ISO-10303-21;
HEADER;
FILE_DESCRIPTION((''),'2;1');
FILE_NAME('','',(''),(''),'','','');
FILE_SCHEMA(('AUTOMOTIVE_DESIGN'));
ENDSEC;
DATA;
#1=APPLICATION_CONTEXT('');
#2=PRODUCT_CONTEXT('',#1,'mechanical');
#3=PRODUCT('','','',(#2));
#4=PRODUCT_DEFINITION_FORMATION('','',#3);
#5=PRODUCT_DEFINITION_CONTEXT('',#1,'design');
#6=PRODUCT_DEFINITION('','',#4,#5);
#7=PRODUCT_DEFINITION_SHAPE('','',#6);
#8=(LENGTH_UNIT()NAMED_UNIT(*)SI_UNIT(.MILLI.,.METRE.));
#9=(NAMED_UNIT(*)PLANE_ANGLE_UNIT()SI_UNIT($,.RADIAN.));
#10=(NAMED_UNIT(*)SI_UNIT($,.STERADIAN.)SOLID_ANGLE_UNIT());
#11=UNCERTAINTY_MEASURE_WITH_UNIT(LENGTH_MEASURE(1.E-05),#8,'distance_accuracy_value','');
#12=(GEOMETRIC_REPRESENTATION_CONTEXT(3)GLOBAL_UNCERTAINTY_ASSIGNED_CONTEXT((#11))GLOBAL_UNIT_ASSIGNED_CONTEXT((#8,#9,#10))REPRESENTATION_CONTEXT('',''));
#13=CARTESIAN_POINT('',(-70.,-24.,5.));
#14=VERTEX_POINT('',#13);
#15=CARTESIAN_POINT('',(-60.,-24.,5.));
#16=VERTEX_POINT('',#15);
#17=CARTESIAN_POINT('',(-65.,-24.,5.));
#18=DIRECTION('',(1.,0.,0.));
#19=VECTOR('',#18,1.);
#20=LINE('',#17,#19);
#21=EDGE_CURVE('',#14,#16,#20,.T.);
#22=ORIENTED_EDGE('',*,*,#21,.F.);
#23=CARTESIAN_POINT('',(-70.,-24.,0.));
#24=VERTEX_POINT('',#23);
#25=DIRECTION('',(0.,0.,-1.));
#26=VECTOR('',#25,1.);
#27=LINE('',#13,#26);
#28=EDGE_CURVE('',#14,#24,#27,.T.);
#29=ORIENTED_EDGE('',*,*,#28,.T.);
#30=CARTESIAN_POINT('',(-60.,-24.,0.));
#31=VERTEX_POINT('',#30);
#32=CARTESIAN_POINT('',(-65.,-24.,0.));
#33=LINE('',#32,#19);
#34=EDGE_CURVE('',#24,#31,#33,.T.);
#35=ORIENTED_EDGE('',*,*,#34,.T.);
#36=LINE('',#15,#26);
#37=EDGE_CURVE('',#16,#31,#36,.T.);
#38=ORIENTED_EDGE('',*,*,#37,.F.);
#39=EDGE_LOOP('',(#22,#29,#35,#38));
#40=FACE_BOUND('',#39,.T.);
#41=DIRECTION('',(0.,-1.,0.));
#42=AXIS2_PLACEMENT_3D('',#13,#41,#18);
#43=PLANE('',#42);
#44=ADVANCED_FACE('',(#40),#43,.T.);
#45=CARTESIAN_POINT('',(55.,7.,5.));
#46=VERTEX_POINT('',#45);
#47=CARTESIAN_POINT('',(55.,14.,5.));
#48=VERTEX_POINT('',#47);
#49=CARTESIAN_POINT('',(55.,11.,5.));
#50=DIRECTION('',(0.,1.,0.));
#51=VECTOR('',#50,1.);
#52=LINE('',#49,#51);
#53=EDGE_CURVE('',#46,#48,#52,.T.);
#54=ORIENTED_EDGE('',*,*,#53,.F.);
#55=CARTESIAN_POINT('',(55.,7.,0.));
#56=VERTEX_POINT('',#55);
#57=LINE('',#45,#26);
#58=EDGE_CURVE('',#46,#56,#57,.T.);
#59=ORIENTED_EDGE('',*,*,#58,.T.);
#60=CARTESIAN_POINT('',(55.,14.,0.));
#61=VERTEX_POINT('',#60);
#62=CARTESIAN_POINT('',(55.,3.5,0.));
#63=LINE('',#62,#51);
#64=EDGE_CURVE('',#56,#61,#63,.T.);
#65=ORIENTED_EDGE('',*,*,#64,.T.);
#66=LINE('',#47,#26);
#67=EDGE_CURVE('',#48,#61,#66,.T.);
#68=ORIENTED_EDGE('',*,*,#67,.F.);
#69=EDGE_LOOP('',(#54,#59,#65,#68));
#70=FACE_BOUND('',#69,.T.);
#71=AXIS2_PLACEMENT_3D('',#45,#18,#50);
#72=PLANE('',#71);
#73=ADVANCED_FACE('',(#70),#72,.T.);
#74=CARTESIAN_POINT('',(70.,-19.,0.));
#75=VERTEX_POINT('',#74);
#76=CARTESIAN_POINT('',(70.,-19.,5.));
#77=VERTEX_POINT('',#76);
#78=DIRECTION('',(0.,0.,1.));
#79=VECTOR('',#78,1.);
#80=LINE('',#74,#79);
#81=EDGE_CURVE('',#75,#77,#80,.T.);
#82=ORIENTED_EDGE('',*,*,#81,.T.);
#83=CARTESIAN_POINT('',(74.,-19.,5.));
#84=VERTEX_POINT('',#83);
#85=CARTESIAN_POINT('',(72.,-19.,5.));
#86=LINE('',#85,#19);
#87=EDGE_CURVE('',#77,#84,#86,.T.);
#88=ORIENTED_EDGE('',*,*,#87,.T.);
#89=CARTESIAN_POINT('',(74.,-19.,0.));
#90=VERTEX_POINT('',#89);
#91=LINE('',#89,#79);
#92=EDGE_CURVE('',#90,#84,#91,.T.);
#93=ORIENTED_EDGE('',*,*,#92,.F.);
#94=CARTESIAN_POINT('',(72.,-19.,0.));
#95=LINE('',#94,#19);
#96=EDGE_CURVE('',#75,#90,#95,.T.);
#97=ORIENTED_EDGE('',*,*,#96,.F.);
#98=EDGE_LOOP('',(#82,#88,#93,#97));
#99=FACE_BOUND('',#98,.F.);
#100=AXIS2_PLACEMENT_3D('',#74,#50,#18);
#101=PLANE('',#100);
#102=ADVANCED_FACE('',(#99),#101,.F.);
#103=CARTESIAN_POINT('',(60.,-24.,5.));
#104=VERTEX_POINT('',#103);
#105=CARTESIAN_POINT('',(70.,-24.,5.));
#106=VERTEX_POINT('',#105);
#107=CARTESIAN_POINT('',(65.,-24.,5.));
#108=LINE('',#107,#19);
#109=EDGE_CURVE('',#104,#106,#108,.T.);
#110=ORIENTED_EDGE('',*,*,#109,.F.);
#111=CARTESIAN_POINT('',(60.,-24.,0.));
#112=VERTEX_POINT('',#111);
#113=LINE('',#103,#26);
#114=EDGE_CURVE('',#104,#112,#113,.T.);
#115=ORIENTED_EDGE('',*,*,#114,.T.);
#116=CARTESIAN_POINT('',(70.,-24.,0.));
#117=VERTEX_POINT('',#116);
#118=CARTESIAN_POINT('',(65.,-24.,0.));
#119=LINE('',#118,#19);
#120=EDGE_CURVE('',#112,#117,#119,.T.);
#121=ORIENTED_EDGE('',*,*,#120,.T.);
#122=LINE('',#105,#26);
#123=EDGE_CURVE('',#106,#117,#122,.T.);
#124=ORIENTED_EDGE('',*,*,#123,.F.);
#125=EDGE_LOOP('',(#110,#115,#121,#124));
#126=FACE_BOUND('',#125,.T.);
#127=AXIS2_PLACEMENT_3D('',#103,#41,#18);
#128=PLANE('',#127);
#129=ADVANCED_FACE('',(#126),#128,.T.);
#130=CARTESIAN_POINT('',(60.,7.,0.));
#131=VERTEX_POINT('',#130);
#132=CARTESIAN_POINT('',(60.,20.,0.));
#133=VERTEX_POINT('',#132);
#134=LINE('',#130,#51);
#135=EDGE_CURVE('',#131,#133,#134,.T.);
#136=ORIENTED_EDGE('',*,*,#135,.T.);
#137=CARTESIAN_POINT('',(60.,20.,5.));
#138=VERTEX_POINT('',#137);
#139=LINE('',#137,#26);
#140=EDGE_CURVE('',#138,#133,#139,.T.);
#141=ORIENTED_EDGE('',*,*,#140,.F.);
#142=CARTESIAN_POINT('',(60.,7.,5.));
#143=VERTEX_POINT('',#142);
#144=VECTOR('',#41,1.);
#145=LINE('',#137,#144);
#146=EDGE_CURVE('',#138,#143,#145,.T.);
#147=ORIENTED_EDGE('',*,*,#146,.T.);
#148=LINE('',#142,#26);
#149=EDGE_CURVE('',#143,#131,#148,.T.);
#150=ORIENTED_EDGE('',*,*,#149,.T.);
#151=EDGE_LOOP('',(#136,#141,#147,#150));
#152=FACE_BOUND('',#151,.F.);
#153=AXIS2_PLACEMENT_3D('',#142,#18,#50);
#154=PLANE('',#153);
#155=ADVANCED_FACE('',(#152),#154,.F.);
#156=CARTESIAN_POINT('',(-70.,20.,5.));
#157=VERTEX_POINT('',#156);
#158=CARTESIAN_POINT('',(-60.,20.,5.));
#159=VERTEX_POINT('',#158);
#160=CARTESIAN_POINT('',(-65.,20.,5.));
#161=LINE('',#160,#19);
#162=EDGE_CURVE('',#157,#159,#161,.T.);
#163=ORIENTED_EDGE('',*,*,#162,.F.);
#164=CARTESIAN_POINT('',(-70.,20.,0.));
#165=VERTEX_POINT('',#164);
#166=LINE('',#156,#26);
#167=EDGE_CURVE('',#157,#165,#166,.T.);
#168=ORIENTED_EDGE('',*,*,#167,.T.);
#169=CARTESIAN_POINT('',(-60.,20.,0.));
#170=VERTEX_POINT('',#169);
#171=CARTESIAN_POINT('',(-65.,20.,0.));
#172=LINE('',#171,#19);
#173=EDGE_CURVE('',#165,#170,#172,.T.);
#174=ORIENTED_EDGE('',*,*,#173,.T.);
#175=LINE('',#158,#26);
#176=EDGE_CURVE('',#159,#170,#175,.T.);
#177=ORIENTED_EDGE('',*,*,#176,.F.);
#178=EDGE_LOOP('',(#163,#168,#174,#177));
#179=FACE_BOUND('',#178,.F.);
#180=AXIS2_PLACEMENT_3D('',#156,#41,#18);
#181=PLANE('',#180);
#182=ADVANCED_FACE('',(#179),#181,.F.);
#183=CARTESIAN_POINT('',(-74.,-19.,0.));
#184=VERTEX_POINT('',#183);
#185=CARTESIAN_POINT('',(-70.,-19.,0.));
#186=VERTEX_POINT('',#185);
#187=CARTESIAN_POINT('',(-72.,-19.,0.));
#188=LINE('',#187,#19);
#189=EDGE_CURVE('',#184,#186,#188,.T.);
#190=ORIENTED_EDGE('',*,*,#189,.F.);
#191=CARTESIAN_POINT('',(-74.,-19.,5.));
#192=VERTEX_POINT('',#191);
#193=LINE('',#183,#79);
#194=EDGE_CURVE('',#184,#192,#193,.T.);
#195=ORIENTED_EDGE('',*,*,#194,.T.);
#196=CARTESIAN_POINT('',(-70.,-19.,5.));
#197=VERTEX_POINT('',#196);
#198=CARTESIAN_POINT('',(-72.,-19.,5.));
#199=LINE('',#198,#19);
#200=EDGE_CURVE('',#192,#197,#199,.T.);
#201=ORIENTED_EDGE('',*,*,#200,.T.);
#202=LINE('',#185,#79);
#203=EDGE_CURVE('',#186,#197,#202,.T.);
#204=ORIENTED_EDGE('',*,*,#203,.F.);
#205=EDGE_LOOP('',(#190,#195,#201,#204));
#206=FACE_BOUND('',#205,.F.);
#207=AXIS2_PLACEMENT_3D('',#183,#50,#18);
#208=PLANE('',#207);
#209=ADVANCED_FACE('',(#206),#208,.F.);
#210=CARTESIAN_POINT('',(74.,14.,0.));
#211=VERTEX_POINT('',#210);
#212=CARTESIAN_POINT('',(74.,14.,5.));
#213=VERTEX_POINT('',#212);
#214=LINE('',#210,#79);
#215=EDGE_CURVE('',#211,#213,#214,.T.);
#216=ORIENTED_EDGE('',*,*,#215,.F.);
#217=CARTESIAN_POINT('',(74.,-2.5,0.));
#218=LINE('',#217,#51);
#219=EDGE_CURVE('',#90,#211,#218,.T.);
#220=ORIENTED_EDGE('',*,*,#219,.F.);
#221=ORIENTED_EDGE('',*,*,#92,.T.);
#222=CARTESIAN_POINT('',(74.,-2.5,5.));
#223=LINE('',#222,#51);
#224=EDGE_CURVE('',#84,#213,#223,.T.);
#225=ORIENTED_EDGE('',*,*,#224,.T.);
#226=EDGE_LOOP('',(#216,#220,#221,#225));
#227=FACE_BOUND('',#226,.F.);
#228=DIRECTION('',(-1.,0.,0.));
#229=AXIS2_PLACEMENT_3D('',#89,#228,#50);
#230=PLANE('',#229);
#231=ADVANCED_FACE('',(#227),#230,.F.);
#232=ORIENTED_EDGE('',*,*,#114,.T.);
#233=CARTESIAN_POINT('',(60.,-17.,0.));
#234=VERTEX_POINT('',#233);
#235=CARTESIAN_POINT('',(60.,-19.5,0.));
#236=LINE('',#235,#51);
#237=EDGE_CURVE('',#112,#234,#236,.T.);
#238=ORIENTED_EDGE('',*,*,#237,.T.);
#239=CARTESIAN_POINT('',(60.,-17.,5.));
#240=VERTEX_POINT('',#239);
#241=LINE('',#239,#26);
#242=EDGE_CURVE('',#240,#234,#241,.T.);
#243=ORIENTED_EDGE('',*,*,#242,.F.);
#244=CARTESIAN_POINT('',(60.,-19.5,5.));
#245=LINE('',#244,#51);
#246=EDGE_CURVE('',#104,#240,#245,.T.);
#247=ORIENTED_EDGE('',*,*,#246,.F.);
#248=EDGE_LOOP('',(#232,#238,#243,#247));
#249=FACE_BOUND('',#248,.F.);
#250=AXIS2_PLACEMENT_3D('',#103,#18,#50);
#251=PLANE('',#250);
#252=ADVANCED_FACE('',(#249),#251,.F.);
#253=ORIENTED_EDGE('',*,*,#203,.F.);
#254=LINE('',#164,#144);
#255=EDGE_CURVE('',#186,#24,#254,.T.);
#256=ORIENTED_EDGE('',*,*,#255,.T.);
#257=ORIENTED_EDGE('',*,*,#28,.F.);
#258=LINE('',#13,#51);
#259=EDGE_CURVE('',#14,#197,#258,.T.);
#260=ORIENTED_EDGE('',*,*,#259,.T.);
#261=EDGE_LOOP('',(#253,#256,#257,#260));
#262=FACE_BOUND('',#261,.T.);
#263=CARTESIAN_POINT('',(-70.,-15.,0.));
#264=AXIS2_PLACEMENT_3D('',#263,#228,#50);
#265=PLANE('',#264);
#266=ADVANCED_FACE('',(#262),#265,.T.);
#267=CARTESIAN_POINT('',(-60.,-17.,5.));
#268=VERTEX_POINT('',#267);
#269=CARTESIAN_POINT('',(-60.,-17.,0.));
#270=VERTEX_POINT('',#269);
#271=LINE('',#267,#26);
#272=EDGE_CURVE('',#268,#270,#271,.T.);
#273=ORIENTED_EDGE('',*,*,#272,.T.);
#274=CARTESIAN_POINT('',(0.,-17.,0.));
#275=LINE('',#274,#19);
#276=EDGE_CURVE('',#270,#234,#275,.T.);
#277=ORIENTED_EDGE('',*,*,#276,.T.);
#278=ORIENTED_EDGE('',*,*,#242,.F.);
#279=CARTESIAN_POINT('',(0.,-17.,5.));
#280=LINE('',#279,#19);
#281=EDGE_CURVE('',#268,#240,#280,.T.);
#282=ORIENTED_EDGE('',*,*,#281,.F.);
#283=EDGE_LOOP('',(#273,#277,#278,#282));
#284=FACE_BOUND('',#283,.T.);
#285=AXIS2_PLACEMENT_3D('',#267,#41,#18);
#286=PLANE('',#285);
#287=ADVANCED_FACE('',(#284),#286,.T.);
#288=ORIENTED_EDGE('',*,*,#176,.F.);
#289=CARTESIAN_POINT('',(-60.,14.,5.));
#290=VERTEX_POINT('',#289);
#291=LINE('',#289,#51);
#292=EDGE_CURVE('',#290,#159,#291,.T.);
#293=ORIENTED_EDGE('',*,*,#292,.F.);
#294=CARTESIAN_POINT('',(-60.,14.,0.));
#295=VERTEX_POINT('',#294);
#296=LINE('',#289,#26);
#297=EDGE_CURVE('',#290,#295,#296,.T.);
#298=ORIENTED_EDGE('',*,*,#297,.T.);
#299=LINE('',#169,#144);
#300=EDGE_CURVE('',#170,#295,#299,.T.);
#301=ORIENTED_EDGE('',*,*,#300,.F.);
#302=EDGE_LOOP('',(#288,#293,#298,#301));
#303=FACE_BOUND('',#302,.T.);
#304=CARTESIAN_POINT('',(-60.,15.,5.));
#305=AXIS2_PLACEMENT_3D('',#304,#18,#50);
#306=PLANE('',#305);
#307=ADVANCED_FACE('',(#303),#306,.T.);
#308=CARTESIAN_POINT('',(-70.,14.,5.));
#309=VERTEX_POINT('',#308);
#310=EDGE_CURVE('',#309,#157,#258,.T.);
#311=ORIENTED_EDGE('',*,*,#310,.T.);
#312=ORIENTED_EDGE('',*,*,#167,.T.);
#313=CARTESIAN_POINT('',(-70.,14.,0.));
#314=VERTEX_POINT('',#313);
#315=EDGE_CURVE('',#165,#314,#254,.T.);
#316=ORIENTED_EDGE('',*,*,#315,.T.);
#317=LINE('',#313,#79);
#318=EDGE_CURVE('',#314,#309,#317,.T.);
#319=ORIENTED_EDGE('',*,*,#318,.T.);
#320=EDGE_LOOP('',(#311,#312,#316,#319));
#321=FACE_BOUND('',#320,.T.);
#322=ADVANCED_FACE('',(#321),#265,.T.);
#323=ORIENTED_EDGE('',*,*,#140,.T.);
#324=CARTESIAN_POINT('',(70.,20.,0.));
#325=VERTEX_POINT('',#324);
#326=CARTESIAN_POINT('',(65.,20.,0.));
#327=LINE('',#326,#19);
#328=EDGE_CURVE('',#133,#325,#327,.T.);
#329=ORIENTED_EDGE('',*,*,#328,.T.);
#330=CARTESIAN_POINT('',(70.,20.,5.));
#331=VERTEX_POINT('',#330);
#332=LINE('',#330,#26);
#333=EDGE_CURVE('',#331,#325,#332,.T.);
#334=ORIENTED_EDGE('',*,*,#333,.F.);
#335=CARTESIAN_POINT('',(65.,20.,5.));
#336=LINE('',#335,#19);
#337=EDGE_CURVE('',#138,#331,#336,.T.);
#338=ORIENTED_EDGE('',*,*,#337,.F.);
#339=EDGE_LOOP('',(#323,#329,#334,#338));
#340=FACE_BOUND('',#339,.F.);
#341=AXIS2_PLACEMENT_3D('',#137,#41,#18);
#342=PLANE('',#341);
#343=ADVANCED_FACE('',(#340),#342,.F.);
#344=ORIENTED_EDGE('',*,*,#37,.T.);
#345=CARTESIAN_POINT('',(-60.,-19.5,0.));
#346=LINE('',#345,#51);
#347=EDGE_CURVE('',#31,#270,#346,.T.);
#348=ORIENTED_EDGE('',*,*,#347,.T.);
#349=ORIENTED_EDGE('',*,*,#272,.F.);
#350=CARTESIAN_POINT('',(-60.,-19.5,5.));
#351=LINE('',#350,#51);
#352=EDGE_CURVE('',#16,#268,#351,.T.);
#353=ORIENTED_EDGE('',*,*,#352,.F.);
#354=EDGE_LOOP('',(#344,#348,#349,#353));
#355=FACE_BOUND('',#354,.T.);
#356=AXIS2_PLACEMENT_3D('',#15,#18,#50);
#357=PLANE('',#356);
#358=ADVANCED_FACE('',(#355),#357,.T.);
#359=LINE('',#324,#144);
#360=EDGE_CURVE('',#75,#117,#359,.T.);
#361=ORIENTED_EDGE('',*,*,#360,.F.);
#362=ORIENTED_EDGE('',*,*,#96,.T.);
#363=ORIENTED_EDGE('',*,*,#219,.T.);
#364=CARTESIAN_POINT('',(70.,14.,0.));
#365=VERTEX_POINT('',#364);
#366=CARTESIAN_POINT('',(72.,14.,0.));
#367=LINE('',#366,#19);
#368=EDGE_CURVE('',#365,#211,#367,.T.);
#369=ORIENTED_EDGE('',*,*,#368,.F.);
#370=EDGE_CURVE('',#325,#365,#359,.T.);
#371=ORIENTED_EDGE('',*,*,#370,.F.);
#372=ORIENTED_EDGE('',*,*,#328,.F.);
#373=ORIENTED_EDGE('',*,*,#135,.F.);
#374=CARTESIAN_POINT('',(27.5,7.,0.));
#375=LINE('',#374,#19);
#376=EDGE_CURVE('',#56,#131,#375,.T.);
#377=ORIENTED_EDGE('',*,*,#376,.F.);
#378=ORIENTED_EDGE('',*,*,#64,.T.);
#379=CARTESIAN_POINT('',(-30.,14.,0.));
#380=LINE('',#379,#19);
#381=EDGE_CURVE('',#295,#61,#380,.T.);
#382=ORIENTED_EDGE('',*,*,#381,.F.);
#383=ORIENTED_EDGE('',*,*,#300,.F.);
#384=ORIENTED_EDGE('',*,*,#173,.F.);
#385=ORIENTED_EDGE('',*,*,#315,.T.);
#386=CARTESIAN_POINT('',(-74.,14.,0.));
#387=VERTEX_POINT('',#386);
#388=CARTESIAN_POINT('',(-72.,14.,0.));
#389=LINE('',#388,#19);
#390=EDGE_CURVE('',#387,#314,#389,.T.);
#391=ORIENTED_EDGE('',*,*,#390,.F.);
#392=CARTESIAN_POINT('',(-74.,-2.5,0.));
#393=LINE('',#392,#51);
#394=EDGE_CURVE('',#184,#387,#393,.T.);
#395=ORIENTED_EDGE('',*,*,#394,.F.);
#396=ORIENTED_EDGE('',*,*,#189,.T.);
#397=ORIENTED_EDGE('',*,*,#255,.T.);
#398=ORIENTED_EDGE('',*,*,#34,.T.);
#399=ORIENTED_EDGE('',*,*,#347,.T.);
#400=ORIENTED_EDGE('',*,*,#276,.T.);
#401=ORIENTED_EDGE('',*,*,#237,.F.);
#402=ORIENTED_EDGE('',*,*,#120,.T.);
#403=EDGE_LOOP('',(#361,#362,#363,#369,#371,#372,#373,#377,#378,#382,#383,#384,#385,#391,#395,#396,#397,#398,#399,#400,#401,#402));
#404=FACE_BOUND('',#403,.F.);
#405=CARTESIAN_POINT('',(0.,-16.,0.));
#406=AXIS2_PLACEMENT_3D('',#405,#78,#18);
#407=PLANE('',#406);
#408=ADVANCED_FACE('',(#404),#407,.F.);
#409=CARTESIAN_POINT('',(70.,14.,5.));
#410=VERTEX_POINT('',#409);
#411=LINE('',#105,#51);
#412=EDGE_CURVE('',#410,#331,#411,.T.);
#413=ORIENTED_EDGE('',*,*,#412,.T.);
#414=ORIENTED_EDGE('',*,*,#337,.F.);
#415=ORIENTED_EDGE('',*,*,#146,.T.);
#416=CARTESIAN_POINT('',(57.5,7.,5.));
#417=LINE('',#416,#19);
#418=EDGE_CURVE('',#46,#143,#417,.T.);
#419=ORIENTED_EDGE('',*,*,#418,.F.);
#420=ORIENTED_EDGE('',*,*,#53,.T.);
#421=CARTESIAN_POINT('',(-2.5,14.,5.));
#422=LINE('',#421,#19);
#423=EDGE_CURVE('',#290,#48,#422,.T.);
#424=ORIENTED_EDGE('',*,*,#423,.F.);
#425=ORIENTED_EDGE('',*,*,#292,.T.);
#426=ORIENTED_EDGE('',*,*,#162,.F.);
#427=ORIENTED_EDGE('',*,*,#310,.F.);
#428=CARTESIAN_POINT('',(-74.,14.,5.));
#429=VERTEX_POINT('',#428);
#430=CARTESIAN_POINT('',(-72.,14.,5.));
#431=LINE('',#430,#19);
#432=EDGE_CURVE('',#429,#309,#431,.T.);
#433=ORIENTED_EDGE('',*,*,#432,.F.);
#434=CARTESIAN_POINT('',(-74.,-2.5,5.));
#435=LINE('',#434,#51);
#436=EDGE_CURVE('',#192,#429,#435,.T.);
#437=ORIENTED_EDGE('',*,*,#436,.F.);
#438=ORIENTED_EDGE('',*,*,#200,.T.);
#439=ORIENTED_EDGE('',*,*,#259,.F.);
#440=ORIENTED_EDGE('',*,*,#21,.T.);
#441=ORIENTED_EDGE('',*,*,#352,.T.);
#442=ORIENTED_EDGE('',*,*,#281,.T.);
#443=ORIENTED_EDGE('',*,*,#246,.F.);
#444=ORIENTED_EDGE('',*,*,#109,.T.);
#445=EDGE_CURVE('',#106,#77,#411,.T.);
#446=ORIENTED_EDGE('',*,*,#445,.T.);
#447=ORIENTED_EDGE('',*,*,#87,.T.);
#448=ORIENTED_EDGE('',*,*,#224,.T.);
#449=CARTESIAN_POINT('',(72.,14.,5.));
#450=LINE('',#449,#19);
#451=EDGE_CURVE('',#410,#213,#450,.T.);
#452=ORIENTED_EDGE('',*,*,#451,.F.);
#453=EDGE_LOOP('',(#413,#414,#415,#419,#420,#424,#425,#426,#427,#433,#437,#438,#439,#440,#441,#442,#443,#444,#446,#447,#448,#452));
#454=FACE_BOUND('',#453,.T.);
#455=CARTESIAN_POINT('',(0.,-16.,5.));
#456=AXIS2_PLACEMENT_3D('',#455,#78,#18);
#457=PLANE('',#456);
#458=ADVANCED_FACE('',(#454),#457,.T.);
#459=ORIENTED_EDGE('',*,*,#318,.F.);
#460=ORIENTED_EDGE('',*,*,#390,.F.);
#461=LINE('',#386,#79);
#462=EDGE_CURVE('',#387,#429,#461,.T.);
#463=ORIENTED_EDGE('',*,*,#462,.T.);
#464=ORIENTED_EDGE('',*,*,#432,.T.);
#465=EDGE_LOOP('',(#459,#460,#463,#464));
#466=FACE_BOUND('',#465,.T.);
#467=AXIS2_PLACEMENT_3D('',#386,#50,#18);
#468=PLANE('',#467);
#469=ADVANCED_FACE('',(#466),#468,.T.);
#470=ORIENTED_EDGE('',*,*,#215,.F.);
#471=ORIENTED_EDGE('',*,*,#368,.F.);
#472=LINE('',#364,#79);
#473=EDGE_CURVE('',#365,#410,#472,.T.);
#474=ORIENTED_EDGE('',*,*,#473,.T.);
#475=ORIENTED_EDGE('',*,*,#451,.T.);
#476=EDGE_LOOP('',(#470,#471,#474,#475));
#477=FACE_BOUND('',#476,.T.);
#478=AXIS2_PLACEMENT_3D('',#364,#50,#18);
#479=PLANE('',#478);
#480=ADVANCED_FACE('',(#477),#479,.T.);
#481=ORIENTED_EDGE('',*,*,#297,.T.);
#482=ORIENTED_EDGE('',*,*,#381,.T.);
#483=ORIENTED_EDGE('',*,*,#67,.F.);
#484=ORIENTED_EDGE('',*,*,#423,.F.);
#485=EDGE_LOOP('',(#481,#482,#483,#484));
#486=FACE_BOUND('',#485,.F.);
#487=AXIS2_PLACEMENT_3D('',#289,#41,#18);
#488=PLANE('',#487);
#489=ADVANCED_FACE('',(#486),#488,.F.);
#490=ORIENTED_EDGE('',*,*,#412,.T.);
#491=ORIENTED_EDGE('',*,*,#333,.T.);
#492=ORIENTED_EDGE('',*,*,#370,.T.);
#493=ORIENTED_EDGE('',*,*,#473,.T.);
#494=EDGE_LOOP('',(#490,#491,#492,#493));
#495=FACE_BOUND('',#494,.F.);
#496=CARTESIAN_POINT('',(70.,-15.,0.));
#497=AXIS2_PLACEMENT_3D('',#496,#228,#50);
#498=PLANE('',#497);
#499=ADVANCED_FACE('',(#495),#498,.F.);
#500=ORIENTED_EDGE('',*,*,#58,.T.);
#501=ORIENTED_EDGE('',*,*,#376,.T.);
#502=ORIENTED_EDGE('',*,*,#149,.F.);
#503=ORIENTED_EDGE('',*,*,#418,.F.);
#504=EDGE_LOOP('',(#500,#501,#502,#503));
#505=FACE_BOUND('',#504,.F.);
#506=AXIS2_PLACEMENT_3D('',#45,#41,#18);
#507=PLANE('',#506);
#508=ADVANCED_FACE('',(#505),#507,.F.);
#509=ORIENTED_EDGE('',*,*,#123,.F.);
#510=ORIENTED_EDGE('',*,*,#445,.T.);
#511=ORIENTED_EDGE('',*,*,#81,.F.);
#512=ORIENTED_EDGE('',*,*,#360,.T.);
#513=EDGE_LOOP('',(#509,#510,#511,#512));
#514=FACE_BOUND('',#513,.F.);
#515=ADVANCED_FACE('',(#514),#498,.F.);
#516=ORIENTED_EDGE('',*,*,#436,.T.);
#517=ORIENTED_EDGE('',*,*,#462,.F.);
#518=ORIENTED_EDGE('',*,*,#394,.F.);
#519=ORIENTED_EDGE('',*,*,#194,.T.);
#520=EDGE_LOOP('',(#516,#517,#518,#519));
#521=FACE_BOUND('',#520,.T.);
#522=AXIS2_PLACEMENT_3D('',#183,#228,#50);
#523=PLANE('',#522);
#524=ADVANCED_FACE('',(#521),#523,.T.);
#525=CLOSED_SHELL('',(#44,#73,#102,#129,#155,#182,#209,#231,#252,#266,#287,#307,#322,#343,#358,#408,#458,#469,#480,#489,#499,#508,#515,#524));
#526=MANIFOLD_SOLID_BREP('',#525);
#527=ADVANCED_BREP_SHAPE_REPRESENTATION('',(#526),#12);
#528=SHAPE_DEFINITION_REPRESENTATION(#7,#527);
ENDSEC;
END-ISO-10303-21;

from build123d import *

# Parameters (mm, degrees)
F0_W      = 140
F0_H      = 30
F1_DEPTH  = 5
F2_W      = 10
F2_H      = 5
F3_DEPTH  = 5
F2_H_2    = 9
F5_W      = 5
F5_H      = 8
F6_DEPTH  = 25
F7_W      = 120
F7_H      = 2
F8_DEPTH  = 5
F9_W      = 115
F9_H      = 1
F10_DEPTH = 25
F11_W     = 4
F11_H     = 33
F12_DEPTH = 5


# Not quite as in the source:
# - a feature names something its author has since deleted; it is built from what else it names


with BuildPart() as f1:
    # F0 (on Top) → F1 (new body)
    with BuildSketch(Plane.XY):
        Rectangle(F0_W, F0_H)
    extrude(amount=F1_DEPTH)


with BuildPart() as f3:
    # F2 (on face) → F3 (new body)
    with BuildSketch(Plane.XY.offset(5)):
        with Locations((65, 17.5)):
            Rectangle(F2_W, F2_H)
    extrude(amount=-F3_DEPTH)


with BuildPart() as f3b:
    # F2 (on face) → F3, piece 2 (new body)
    with BuildSketch(Plane.XY.offset(5)):
        with Locations((-65, 17.5)):
            Rectangle(F2_W, F2_H)
    extrude(amount=-F3_DEPTH)


with BuildPart() as f3c:
    # F2 (on face) → F3, piece 3 (new body)
    with BuildSketch(Plane.XY.offset(5)):
        with Locations((-65, -19.5)):
            Rectangle(F2_W, F2_H_2)
    extrude(amount=-F3_DEPTH)


with BuildPart() as f3d:
    # F2 (on face) → F3, piece 4 (new body)
    with BuildSketch(Plane.XY.offset(5)):
        with Locations((65, -19.5)):
            Rectangle(F2_W, F2_H_2)
    extrude(amount=-F3_DEPTH)


with BuildPart() as f3b_1:
    add(f3b.part)

    # F4: union F3, F3c, F3d, F1
    add(f3.part)
    add(f3c.part)
    add(f3d.part)
    add(f1.part)

    # F5 (on face) → F6 (cut)
    with BuildSketch(Plane.XY.offset(5)):
        with Locations((57.5, 11)):
            Rectangle(F5_W, F5_H)
    extrude(amount=-F6_DEPTH, mode=Mode.SUBTRACT)

    # F7 (on face) → F8 (join)
    with BuildSketch(Plane.XY.offset(5)):
        with Locations((0, -16)):
            Rectangle(F7_W, F7_H)
    extrude(amount=-F8_DEPTH)

    # F9 (on face) → F10 (cut)
    with BuildSketch(Plane.XY.offset(5)):
        with Locations((-2.5, 14.5)):
            Rectangle(F9_W, F9_H)
    extrude(amount=-F10_DEPTH, mode=Mode.SUBTRACT)

    # F11 (on Top) → F12 (join)
    with BuildSketch(Plane.XY):
        with Locations((-72, -2.5)):
            Rectangle(F11_W, F11_H)
        with Locations((72, -2.5)):
            Rectangle(F11_W, F11_H)
    extrude(amount=F12_DEPTH)


solid = f3b_1.part
